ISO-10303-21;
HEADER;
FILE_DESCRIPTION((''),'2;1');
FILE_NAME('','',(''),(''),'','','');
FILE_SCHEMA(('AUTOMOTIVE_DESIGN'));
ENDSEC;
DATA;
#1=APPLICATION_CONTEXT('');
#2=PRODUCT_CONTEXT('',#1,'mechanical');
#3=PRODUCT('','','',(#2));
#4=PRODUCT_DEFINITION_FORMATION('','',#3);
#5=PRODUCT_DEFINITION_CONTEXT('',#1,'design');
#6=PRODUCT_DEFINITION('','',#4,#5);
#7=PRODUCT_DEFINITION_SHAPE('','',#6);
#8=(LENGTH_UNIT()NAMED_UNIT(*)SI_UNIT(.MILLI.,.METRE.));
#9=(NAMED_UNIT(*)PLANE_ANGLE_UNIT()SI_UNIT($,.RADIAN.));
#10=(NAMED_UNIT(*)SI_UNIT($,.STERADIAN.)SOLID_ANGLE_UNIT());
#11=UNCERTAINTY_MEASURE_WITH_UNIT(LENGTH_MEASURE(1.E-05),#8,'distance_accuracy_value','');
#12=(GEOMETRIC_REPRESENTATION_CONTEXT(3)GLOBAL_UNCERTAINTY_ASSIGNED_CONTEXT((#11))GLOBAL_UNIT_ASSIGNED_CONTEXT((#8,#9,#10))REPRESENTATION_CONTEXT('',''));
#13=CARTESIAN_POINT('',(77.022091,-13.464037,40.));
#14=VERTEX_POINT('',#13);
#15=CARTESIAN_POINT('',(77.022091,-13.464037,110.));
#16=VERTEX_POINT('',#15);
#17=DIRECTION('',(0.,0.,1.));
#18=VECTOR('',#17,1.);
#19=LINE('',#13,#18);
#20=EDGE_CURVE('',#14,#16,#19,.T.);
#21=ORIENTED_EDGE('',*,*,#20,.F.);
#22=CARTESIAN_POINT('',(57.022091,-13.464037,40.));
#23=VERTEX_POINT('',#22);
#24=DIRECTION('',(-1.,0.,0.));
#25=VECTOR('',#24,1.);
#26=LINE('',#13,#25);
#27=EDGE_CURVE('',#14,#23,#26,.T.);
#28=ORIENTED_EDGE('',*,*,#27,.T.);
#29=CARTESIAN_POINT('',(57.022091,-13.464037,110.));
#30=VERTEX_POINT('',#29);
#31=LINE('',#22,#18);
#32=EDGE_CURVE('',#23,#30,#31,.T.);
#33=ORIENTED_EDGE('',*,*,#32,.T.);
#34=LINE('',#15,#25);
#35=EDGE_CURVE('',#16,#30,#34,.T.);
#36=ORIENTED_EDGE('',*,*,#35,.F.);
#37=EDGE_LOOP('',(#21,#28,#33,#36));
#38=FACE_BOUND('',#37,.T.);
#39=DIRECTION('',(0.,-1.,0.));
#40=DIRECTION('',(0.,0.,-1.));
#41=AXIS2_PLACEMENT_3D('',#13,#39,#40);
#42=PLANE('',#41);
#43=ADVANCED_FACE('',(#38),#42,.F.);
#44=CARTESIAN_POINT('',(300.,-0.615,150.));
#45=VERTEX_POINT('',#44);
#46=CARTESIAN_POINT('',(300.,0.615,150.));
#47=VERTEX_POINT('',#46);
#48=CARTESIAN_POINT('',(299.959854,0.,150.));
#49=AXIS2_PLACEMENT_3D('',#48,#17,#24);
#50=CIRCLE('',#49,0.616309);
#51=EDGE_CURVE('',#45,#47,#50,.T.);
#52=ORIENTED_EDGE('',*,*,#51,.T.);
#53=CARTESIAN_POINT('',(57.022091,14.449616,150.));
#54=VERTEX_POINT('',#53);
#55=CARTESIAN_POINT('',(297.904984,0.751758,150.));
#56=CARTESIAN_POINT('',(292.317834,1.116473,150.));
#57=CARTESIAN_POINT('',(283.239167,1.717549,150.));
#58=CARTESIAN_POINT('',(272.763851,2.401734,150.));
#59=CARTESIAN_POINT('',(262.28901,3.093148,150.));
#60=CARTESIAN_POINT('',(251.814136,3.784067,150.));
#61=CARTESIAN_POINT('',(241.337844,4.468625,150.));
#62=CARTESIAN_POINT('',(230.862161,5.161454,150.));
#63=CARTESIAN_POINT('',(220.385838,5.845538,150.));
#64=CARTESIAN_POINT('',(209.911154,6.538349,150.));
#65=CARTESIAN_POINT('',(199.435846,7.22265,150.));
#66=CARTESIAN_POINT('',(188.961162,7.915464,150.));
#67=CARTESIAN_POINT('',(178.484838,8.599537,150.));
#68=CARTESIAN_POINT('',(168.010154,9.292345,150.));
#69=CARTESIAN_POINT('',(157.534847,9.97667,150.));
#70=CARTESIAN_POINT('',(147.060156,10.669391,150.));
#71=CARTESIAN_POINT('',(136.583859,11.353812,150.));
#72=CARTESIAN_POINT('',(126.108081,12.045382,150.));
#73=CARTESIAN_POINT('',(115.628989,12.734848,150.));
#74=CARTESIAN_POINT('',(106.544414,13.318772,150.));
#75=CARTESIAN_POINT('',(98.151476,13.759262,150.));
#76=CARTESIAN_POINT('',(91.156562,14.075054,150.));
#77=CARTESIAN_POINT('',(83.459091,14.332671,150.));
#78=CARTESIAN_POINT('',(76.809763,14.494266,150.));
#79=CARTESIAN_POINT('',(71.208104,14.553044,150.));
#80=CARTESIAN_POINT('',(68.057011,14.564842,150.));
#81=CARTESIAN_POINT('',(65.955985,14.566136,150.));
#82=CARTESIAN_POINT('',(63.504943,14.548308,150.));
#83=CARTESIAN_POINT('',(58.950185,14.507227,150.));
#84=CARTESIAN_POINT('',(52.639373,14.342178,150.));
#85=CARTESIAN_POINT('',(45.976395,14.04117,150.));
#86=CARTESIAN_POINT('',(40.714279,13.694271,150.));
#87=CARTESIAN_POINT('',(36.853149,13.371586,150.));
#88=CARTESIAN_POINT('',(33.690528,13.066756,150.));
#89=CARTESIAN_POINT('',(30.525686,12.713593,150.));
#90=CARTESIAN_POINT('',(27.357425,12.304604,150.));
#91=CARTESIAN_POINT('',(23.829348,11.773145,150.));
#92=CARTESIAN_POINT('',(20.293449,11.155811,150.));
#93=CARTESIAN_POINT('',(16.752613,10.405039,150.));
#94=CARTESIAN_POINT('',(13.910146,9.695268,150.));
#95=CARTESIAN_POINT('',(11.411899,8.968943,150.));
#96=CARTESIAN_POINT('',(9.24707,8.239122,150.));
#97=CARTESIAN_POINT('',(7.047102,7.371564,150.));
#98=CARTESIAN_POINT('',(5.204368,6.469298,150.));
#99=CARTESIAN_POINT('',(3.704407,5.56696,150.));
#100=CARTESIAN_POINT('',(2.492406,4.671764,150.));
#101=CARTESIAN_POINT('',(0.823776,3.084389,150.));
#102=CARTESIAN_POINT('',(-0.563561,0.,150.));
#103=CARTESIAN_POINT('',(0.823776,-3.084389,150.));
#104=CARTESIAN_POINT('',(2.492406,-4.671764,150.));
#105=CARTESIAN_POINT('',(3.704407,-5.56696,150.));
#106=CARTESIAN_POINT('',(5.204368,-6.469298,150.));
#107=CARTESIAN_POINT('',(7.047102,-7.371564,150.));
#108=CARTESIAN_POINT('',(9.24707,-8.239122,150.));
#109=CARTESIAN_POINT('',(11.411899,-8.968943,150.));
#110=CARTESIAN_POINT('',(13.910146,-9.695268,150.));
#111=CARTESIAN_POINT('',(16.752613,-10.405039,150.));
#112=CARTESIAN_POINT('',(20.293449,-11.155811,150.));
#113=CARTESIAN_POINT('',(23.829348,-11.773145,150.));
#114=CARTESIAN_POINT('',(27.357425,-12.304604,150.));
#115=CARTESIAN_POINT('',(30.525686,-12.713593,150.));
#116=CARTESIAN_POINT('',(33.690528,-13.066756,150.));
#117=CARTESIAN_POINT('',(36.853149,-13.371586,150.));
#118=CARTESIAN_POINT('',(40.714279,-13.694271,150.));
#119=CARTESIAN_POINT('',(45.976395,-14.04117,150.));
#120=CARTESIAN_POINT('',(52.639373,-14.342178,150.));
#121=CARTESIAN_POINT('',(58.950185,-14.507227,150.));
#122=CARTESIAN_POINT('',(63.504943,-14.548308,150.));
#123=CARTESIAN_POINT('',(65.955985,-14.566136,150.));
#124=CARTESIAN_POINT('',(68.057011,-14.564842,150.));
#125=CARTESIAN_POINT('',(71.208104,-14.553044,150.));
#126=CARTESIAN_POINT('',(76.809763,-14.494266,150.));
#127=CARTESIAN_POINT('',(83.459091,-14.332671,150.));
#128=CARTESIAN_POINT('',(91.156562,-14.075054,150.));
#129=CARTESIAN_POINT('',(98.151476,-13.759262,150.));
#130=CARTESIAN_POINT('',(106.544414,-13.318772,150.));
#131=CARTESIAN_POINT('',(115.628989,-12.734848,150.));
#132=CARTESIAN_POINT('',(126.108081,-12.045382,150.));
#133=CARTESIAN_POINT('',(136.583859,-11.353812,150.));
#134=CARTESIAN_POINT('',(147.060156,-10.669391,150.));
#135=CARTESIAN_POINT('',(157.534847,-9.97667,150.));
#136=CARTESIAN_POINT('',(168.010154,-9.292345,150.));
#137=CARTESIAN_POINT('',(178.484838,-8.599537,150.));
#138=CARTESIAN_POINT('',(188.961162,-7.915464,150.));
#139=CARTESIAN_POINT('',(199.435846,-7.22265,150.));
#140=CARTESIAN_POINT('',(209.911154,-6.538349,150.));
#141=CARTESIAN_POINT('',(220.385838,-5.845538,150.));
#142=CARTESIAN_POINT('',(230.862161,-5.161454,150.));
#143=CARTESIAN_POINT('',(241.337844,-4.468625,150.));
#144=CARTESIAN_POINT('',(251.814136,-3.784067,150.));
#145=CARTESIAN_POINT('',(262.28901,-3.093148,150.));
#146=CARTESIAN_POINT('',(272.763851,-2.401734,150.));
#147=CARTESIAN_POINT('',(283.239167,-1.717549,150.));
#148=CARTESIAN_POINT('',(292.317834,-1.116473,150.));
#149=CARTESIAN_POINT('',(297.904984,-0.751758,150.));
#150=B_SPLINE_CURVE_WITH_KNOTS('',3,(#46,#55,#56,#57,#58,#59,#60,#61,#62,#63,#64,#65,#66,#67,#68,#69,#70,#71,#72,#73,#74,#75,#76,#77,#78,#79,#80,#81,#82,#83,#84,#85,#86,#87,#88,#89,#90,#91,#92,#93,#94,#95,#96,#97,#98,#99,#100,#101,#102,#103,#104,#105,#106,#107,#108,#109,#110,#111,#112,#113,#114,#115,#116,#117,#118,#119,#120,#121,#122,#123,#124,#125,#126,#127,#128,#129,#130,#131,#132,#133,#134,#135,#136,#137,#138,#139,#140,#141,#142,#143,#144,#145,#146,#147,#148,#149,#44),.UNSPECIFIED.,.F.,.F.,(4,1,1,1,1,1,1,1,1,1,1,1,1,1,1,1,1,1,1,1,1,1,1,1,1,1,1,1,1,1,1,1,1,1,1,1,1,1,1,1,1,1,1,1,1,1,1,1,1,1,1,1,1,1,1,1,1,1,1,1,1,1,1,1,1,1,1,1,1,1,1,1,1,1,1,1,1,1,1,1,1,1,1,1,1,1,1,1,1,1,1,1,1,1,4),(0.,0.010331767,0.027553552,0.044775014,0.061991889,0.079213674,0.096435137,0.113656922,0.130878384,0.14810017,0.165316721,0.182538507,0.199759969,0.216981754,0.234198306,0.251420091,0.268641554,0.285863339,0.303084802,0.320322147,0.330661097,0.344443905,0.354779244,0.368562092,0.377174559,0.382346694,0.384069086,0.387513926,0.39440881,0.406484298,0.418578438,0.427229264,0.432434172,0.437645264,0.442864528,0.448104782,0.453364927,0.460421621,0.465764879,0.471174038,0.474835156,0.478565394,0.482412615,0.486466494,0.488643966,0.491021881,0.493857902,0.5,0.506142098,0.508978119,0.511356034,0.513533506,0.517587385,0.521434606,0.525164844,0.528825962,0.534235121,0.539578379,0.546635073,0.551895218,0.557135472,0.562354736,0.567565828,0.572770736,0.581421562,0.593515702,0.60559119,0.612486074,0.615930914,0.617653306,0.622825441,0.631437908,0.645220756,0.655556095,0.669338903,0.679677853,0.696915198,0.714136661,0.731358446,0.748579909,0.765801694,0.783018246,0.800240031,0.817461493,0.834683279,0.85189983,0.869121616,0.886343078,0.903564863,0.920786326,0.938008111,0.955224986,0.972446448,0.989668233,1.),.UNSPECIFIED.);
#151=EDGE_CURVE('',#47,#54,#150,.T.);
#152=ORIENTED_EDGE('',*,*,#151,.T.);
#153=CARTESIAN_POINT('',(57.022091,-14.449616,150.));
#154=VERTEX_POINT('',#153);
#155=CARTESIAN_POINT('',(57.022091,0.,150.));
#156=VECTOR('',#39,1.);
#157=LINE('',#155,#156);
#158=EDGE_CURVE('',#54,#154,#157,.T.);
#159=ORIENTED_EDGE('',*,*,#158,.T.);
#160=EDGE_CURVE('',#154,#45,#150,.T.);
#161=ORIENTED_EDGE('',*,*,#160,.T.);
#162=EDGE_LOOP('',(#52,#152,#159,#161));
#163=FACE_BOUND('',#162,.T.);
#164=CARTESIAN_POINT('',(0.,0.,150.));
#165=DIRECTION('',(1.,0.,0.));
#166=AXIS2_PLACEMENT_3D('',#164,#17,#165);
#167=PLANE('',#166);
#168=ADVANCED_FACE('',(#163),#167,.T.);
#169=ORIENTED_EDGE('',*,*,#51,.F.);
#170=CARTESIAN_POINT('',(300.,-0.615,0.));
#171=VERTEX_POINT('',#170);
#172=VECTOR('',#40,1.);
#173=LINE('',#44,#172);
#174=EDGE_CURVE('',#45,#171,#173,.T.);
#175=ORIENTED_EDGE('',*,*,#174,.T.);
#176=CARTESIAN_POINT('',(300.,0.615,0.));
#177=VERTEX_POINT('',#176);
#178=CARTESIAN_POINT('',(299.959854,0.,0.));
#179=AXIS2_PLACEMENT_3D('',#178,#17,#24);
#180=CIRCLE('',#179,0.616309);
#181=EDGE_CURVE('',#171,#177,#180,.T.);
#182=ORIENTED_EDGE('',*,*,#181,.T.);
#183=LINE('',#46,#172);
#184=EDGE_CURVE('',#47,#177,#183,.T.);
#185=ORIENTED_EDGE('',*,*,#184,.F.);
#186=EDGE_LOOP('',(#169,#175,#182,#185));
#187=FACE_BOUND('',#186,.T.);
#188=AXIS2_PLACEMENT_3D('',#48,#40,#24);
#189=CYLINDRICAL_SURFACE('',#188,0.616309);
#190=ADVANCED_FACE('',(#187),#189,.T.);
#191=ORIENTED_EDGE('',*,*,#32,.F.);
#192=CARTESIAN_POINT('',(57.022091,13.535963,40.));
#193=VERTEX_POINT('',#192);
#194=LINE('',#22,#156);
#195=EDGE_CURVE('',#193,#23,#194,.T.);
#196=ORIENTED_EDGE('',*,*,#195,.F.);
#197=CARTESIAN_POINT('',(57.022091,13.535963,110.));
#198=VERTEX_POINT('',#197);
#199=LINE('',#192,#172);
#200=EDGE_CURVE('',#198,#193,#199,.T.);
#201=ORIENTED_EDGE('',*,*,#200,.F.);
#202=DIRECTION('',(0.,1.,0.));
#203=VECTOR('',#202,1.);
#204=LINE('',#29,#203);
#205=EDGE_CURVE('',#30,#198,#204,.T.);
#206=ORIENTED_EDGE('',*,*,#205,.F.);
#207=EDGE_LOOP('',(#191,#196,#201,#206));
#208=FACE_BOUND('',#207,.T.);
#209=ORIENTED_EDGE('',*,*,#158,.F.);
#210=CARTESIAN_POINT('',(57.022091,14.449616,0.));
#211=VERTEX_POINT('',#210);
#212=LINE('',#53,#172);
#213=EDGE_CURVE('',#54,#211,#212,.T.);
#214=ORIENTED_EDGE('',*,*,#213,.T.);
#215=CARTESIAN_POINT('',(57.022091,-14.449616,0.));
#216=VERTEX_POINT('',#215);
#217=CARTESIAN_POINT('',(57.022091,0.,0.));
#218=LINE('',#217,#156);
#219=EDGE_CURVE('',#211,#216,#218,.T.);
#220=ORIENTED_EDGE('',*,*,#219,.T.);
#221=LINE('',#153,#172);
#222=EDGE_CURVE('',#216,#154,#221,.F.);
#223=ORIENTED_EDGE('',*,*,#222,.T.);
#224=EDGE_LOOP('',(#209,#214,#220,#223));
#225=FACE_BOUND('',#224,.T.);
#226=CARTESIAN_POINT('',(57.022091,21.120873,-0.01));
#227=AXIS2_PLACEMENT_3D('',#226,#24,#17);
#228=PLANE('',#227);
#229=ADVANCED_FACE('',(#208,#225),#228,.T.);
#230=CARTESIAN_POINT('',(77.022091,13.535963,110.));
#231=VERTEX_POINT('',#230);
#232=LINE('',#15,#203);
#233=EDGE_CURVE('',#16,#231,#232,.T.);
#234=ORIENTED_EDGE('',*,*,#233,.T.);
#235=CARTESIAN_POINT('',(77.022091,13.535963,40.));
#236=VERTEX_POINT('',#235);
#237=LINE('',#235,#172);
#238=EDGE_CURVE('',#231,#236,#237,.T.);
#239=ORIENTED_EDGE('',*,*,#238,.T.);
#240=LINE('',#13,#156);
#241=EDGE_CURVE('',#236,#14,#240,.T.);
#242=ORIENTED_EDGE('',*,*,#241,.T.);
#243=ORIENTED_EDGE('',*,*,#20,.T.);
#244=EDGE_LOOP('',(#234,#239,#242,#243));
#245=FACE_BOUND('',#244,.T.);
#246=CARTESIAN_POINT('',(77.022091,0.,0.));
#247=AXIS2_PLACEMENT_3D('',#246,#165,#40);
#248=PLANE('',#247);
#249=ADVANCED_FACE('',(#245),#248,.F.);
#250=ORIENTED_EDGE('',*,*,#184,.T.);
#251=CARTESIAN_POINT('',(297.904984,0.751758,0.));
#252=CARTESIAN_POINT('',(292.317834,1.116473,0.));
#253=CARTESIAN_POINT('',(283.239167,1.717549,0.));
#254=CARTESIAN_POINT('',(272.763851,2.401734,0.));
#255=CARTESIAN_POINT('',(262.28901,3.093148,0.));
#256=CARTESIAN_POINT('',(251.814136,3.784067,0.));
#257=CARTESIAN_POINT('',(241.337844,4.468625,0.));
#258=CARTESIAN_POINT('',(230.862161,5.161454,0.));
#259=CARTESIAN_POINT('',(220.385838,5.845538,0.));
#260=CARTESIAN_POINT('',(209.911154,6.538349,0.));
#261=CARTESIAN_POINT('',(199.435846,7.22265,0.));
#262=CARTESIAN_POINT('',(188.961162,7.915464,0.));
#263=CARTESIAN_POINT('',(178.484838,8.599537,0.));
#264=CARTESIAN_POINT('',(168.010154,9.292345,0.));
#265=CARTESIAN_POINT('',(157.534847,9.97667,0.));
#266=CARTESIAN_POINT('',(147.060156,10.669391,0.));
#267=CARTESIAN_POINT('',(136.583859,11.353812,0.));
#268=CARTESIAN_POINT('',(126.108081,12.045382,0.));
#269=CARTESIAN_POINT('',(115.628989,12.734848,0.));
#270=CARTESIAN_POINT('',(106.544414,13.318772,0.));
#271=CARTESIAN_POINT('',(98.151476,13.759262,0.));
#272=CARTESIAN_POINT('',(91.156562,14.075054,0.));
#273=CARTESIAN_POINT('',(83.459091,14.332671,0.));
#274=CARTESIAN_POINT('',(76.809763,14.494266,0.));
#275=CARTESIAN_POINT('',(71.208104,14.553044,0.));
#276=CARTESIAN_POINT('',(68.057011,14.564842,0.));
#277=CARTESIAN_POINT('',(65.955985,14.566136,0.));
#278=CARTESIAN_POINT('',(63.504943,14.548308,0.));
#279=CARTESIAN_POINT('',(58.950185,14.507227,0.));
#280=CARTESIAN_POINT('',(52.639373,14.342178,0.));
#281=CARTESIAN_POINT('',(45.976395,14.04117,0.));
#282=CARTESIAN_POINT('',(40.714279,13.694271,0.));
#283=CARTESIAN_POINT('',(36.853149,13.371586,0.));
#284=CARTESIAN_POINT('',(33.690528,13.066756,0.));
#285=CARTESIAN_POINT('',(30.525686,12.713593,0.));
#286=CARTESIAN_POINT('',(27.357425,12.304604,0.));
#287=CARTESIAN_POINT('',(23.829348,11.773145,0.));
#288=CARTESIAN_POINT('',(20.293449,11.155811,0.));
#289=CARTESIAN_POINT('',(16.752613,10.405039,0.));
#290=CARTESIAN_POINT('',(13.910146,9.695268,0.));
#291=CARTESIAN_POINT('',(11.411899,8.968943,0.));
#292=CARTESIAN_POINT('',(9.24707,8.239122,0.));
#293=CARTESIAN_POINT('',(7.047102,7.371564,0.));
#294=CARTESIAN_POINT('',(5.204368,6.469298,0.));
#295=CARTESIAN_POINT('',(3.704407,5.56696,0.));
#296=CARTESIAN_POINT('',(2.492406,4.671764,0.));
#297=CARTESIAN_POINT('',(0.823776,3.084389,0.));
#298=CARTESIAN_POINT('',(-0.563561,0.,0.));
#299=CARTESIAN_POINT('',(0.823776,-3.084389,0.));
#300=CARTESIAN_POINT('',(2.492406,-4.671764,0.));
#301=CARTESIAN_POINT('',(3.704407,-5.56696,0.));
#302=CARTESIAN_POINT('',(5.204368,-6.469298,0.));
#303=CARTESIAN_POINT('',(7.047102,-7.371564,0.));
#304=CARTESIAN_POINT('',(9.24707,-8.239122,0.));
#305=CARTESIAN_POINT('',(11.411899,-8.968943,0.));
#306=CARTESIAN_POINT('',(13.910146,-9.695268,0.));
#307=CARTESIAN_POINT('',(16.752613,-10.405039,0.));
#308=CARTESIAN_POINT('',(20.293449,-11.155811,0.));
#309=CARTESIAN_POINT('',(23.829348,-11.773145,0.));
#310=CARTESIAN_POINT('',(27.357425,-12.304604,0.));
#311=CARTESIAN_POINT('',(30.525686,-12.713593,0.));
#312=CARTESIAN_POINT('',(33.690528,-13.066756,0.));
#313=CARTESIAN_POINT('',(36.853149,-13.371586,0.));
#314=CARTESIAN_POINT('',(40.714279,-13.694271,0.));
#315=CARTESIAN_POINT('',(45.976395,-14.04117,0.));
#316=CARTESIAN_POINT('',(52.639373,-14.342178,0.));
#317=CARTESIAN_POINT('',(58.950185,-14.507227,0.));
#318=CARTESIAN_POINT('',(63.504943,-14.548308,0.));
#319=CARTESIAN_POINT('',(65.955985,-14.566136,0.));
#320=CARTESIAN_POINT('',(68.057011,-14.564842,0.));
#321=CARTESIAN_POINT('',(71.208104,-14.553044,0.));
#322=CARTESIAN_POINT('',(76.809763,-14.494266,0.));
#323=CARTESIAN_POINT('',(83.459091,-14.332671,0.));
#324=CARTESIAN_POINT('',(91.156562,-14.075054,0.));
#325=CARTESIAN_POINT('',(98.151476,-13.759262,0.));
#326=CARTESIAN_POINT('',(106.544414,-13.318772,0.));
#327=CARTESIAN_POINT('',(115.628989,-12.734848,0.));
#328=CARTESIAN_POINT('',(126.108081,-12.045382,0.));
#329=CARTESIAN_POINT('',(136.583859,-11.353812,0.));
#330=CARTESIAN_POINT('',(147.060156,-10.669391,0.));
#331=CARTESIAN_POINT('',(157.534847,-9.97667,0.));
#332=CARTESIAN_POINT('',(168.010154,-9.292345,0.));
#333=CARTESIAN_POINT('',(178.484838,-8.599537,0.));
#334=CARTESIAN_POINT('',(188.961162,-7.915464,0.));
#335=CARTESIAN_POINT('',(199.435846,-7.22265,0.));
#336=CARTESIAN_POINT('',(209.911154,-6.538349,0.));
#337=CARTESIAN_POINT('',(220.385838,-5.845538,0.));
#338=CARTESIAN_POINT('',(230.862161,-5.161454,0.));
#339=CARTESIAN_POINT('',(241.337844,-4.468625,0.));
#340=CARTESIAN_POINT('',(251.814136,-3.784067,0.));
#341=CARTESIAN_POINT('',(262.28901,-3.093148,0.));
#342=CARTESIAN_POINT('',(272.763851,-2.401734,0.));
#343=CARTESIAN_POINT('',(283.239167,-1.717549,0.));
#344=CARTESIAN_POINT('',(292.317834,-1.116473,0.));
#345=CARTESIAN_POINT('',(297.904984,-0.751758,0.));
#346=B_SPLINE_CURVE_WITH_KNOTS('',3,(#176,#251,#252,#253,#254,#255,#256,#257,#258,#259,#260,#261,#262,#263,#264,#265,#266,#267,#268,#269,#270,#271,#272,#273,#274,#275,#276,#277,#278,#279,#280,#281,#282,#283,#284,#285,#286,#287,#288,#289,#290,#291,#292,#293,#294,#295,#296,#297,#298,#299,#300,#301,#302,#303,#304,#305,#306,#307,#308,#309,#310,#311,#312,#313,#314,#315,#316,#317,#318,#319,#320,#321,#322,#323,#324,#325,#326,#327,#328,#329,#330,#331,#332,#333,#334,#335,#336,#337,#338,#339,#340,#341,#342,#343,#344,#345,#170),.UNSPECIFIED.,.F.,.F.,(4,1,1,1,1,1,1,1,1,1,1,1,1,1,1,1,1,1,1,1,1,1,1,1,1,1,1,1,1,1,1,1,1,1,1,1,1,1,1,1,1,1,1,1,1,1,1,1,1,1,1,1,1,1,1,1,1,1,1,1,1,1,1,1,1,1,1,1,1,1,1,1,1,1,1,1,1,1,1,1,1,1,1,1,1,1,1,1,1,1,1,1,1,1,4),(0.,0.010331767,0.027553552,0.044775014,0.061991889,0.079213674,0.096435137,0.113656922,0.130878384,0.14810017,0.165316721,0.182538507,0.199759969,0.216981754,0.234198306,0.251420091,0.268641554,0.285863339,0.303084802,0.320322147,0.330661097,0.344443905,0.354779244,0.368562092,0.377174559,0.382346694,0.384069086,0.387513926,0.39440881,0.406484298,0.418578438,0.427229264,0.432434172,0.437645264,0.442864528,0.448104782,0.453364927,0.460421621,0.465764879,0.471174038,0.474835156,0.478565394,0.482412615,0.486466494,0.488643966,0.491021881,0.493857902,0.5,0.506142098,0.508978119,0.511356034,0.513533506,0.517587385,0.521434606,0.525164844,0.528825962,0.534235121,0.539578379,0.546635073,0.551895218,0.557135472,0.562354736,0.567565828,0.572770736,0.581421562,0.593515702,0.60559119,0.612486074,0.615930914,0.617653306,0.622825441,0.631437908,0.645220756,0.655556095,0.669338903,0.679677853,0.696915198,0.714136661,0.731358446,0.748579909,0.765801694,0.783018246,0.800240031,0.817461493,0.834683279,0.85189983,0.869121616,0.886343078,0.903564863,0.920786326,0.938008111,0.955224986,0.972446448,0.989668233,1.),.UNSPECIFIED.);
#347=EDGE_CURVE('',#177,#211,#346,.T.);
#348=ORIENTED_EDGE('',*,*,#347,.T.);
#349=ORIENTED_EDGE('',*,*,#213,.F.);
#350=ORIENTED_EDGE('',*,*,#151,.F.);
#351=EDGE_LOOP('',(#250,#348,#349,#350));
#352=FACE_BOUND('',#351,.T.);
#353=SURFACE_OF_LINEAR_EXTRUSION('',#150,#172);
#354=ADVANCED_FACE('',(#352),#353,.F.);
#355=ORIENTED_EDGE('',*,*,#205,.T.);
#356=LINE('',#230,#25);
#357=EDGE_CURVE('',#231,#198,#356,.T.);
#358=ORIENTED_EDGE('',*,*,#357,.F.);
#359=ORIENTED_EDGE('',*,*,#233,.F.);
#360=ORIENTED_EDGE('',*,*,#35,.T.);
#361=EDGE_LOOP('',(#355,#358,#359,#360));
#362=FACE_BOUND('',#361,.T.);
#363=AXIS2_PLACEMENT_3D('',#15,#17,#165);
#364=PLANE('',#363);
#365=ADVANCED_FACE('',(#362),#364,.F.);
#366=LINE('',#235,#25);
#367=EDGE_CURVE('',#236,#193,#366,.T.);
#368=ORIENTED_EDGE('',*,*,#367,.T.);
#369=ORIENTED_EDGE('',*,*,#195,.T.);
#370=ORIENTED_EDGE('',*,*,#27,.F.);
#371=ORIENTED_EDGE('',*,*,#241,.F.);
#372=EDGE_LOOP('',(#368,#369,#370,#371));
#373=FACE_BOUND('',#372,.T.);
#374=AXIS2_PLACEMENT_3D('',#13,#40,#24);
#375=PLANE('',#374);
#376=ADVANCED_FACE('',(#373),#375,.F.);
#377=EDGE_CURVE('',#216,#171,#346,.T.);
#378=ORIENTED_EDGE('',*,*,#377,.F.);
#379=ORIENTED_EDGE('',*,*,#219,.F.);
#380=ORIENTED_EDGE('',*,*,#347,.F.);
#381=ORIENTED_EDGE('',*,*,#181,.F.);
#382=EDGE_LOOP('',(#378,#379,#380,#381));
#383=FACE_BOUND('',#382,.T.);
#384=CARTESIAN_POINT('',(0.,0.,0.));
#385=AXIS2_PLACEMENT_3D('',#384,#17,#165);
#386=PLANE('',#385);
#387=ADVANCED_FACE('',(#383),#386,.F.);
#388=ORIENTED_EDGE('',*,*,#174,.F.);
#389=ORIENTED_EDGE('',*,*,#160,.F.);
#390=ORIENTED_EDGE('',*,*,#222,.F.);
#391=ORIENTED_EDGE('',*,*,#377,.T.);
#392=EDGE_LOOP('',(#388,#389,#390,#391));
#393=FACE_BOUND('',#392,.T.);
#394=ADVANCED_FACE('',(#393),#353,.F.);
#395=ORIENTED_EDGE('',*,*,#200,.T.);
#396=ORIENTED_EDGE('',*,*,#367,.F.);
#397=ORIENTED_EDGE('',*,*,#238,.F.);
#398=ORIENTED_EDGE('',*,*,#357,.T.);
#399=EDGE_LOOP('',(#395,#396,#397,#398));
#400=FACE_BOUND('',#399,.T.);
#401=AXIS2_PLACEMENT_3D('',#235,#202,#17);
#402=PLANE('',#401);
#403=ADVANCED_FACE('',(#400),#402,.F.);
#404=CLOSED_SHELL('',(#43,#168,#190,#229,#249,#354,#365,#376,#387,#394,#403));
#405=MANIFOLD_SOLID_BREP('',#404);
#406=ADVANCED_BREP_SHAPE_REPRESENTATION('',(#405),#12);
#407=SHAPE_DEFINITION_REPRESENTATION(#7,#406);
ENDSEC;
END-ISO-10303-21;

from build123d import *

# Parameters (mm, degrees)
BOSS_EXTRU_1_DEPTH             = 150
FRACTIONNER1_SURFACE_1_BACK    = 338.186
FRACTIONNER1_SURFACE_1_DEPTH   = 676.372
FRACTIONNER1_SURFACE_2_BACK    = 338.186
FRACTIONNER1_SURFACE_2_DEPTH   = 676.372
CORPS_SUPPRIMER_GARDER_1_DEPTH = 150
ESQUISSE4_W                    = 70
ESQUISSE4_H                    = 27
ENL_V_MAT_EXTRU_1_DEPTH        = 20


with BuildPart() as part:
    # Esquisse1 → Boss.-Extru.1 (new body)
    with BuildSketch(Plane.XY):
        with BuildLine():
            ThreePointArc((300, 0.615), (300.57616321, 0), (300, -0.615))
            add(Edge.make_bspline(
                [(300, 0.615), (297.904984084, 0.751757543), (292.317834147, 1.116473101), (283.239167486, 1.717548993), (272.763851073, 2.401734129), (262.289009769, 3.093148372), (251.814135815, 3.784066551), (241.337843931, 4.4686253), (230.862161266, 5.161453759), (220.385838201, 5.845538162), (209.911154414, 6.538349242), (199.435845553, 7.222650253), (188.961161962, 7.915464365), (178.484838114, 8.599536639), (168.010154067, 9.292344726), (157.534847028, 9.976669832), (147.06015641, 10.669390538), (136.583858848, 11.353812357), (126.108081003, 12.045381523), (115.628989204, 12.734847578), (106.544413863, 13.318771764), (98.151476207, 13.759261663), (91.156562369, 14.075053545), (83.459091103, 14.332671008), (76.809762769, 14.494266326), (71.208103955, 14.553043896), (68.057010771, 14.564841535), (65.955984612, 14.566136146), (63.504942858, 14.548307662), (58.950185243, 14.50722741), (52.639372933, 14.342178025), (45.976395003, 14.041169691), (40.714278866, 13.694270896), (36.853148612, 13.371585869), (33.690528003, 13.066756335), (30.525686443, 12.713592883), (27.357424626, 12.304603807), (23.829347777, 11.773145061), (20.293449043, 11.155810812), (16.752613493, 10.405038809), (13.91014568, 9.695268378), (11.411898729, 8.968942676), (9.247069544, 8.239122328), (7.047101664, 7.371563533), (5.204368253, 6.469298236), (3.704406867, 5.566960218), (2.492406306, 4.671764118), (0.823776108, 3.084389444), (-0.563560511, 0), (0.823776108, -3.084389444), (2.492406306, -4.671764118), (3.704406867, -5.566960218), (5.204368253, -6.469298236), (7.047101664, -7.371563533), (9.247069544, -8.239122328), (11.411898729, -8.968942676), (13.91014568, -9.695268378), (16.752613493, -10.405038809), (20.293449043, -11.155810812), (23.829347777, -11.773145061), (27.357424626, -12.304603807), (30.525686443, -12.713592883), (33.690528003, -13.066756335), (36.853148612, -13.371585869), (40.714278866, -13.694270896), (45.976395003, -14.041169691), (52.639372933, -14.342178025), (58.950185243, -14.50722741), (63.504942858, -14.548307662), (65.955984612, -14.566136146), (68.057010771, -14.564841535), (71.208103955, -14.553043896), (76.809762769, -14.494266326), (83.459091103, -14.332671008), (91.156562369, -14.075053545), (98.151476207, -13.759261663), (106.544413863, -13.318771764), (115.628989204, -12.734847578), (126.108081003, -12.045381523), (136.583858848, -11.353812357), (147.06015641, -10.669390538), (157.534847028, -9.976669832), (168.010154067, -9.292344726), (178.484838114, -8.599536639), (188.961161962, -7.915464365), (199.435845553, -7.222650253), (209.911154414, -6.538349242), (220.385838201, -5.845538162), (230.862161266, -5.161453759), (241.337843931, -4.4686253), (251.814135815, -3.784066551), (262.289009769, -3.093148372), (272.763851073, -2.401734129), (283.239167486, -1.717548993), (292.317834147, -1.116473101), (297.904984084, -0.751757543), (300, -0.615)],
                knots=[0, 0, 0, 0, 0.010331767, 0.027553552, 0.044775014, 0.061991889, 0.079213674, 0.096435137, 0.113656922, 0.130878384, 0.14810017, 0.165316721, 0.182538507, 0.199759969, 0.216981754, 0.234198306, 0.251420091, 0.268641554, 0.285863339, 0.303084802, 0.320322147, 0.330661097, 0.344443905, 0.354779244, 0.368562092, 0.377174559, 0.382346694, 0.384069086, 0.387513926, 0.39440881, 0.406484298, 0.418578438, 0.427229264, 0.432434172, 0.437645264, 0.442864528, 0.448104782, 0.453364927, 0.460421621, 0.465764879, 0.471174038, 0.474835156, 0.478565394, 0.482412615, 0.486466494, 0.488643966, 0.491021881, 0.493857902, 0.5, 0.506142098, 0.508978119, 0.511356034, 0.513533506, 0.517587385, 0.521434606, 0.525164844, 0.528825962, 0.534235121, 0.539578379, 0.546635073, 0.551895218, 0.557135472, 0.562354736, 0.567565828, 0.572770736, 0.581421562, 0.593515702, 0.60559119, 0.612486074, 0.615930914, 0.617653306, 0.622825441, 0.631437908, 0.645220756, 0.655556095, 0.669338903, 0.679677853, 0.696915198, 0.714136661, 0.731358446, 0.748579909, 0.765801694, 0.783018246, 0.800240031, 0.817461493, 0.834683279, 0.85189983, 0.869121616, 0.886343078, 0.903564863, 0.920786326, 0.938008111, 0.955224986, 0.972446448, 0.989668233, 1, 1, 1, 1], degree=3))
        make_face()
    extrude(amount=BOSS_EXTRU_1_DEPTH)


with BuildPart() as body_2:
    # Fractionner1: the piece behind the surface
    add(part.part)
    # Fractionner1 surface: a surface, the sketch's curves swept straight by 676.372 mm
    with BuildLine(Plane.XY.offset(150).offset(-FRACTIONNER1_SURFACE_1_BACK), mode=Mode.PRIVATE) as fractionner1_surface_1_path:
        Line((57.022091302, 21.120873497), (57.022091302, -26.585419846))
    fractionner1_surface_1 = Shell.extrude(fractionner1_surface_1_path.wire(), (0 * FRACTIONNER1_SURFACE_1_DEPTH, 0 * FRACTIONNER1_SURFACE_1_DEPTH, 1 * FRACTIONNER1_SURFACE_1_DEPTH))
    split(bisect_by=fractionner1_surface_1, keep=Keep.BOTTOM)

    # Corps-Supprimer/Garder 1: read off the stored shape, not the designer's step
    # Corps-Supprimer/Garder 1 outline → Corps-Supprimer/Garder 1 (cut)
    with BuildSketch(Plane.XY):
        with BuildLine():
            Line((57.022091311, -14.449616285), (57.022091311, 14.449616285))
            add(Edge.make_bspline(
                [(57.022091311, 14.449616285), (55.562497262, 14.414805897), (51.646493469, 14.297323458), (45.976395003, 14.041169691), (40.714278866, 13.694270896), (36.853148612, 13.371585869), (33.690528003, 13.066756335), (30.525686443, 12.713592883), (27.357424626, 12.304603807), (23.829347777, 11.773145061), (20.293449043, 11.155810812), (16.752613493, 10.405038809), (13.91014568, 9.695268378), (11.411898729, 8.968942676), (9.247069544, 8.239122328), (7.047101664, 7.371563533), (5.204368253, 6.469298236), (3.704406867, 5.566960218), (2.492406306, 4.671764118), (0.823776108, 3.084389444), (-0.563560511, 0), (0.823776108, -3.084389444), (2.492406306, -4.671764118), (3.704406867, -5.566960218), (5.204368253, -6.469298236), (7.047101664, -7.371563533), (9.247069544, -8.239122328), (11.411898729, -8.968942676), (13.91014568, -9.695268378), (16.752613493, -10.405038809), (20.293449043, -11.155810812), (23.829347777, -11.773145061), (27.357424626, -12.304603807), (30.525686443, -12.713592883), (33.690528003, -13.066756335), (36.853148612, -13.371585869), (40.714278866, -13.694270896), (45.976395003, -14.041169691), (51.646493469, -14.297323458), (55.562497262, -14.414805897), (57.022091311, -14.449616285)],
                knots=[0.399299529, 0.399299529, 0.399299529, 0.399299529, 0.406484298, 0.418578438, 0.427229264, 0.432434172, 0.437645264, 0.442864528, 0.448104782, 0.453364927, 0.460421621, 0.465764879, 0.471174038, 0.474835156, 0.478565394, 0.482412615, 0.486466494, 0.488643966, 0.491021881, 0.493857902, 0.5, 0.506142098, 0.508978119, 0.511356034, 0.513533506, 0.517587385, 0.521434606, 0.525164844, 0.528825962, 0.534235121, 0.539578379, 0.546635073, 0.551895218, 0.557135472, 0.562354736, 0.567565828, 0.572770736, 0.581421562, 0.593515702, 0.600700471, 0.600700471, 0.600700471, 0.600700471], degree=3))
        make_face()
    extrude(amount=CORPS_SUPPRIMER_GARDER_1_DEPTH, mode=Mode.SUBTRACT)


with BuildPart() as part_1:
    add(part.part)

    # Fractionner1: split by a surface, the side it looks to stays
    # Fractionner1 surface: a surface, the sketch's curves swept straight by 676.372 mm
    with BuildLine(Plane.XY.offset(150).offset(-FRACTIONNER1_SURFACE_2_BACK), mode=Mode.PRIVATE) as fractionner1_surface_2_path:
        Line((57.022091302, 21.120873497), (57.022091302, -26.585419846))
    fractionner1_surface_2 = Shell.extrude(fractionner1_surface_2_path.wire(), (0 * FRACTIONNER1_SURFACE_2_DEPTH, 0 * FRACTIONNER1_SURFACE_2_DEPTH, 1 * FRACTIONNER1_SURFACE_2_DEPTH))
    split(bisect_by=fractionner1_surface_2, keep=Keep.TOP)

    # Esquisse4 → Enlèv. mat.-Extru.1 (cut)
    with BuildSketch(Plane.ZY.offset(-57.022091302)):
        with Locations((75, 0.035962925)):
            Rectangle(ESQUISSE4_W, ESQUISSE4_H)
    extrude(amount=-ENL_V_MAT_EXTRU_1_DEPTH, mode=Mode.SUBTRACT)


solid = part_1.part
